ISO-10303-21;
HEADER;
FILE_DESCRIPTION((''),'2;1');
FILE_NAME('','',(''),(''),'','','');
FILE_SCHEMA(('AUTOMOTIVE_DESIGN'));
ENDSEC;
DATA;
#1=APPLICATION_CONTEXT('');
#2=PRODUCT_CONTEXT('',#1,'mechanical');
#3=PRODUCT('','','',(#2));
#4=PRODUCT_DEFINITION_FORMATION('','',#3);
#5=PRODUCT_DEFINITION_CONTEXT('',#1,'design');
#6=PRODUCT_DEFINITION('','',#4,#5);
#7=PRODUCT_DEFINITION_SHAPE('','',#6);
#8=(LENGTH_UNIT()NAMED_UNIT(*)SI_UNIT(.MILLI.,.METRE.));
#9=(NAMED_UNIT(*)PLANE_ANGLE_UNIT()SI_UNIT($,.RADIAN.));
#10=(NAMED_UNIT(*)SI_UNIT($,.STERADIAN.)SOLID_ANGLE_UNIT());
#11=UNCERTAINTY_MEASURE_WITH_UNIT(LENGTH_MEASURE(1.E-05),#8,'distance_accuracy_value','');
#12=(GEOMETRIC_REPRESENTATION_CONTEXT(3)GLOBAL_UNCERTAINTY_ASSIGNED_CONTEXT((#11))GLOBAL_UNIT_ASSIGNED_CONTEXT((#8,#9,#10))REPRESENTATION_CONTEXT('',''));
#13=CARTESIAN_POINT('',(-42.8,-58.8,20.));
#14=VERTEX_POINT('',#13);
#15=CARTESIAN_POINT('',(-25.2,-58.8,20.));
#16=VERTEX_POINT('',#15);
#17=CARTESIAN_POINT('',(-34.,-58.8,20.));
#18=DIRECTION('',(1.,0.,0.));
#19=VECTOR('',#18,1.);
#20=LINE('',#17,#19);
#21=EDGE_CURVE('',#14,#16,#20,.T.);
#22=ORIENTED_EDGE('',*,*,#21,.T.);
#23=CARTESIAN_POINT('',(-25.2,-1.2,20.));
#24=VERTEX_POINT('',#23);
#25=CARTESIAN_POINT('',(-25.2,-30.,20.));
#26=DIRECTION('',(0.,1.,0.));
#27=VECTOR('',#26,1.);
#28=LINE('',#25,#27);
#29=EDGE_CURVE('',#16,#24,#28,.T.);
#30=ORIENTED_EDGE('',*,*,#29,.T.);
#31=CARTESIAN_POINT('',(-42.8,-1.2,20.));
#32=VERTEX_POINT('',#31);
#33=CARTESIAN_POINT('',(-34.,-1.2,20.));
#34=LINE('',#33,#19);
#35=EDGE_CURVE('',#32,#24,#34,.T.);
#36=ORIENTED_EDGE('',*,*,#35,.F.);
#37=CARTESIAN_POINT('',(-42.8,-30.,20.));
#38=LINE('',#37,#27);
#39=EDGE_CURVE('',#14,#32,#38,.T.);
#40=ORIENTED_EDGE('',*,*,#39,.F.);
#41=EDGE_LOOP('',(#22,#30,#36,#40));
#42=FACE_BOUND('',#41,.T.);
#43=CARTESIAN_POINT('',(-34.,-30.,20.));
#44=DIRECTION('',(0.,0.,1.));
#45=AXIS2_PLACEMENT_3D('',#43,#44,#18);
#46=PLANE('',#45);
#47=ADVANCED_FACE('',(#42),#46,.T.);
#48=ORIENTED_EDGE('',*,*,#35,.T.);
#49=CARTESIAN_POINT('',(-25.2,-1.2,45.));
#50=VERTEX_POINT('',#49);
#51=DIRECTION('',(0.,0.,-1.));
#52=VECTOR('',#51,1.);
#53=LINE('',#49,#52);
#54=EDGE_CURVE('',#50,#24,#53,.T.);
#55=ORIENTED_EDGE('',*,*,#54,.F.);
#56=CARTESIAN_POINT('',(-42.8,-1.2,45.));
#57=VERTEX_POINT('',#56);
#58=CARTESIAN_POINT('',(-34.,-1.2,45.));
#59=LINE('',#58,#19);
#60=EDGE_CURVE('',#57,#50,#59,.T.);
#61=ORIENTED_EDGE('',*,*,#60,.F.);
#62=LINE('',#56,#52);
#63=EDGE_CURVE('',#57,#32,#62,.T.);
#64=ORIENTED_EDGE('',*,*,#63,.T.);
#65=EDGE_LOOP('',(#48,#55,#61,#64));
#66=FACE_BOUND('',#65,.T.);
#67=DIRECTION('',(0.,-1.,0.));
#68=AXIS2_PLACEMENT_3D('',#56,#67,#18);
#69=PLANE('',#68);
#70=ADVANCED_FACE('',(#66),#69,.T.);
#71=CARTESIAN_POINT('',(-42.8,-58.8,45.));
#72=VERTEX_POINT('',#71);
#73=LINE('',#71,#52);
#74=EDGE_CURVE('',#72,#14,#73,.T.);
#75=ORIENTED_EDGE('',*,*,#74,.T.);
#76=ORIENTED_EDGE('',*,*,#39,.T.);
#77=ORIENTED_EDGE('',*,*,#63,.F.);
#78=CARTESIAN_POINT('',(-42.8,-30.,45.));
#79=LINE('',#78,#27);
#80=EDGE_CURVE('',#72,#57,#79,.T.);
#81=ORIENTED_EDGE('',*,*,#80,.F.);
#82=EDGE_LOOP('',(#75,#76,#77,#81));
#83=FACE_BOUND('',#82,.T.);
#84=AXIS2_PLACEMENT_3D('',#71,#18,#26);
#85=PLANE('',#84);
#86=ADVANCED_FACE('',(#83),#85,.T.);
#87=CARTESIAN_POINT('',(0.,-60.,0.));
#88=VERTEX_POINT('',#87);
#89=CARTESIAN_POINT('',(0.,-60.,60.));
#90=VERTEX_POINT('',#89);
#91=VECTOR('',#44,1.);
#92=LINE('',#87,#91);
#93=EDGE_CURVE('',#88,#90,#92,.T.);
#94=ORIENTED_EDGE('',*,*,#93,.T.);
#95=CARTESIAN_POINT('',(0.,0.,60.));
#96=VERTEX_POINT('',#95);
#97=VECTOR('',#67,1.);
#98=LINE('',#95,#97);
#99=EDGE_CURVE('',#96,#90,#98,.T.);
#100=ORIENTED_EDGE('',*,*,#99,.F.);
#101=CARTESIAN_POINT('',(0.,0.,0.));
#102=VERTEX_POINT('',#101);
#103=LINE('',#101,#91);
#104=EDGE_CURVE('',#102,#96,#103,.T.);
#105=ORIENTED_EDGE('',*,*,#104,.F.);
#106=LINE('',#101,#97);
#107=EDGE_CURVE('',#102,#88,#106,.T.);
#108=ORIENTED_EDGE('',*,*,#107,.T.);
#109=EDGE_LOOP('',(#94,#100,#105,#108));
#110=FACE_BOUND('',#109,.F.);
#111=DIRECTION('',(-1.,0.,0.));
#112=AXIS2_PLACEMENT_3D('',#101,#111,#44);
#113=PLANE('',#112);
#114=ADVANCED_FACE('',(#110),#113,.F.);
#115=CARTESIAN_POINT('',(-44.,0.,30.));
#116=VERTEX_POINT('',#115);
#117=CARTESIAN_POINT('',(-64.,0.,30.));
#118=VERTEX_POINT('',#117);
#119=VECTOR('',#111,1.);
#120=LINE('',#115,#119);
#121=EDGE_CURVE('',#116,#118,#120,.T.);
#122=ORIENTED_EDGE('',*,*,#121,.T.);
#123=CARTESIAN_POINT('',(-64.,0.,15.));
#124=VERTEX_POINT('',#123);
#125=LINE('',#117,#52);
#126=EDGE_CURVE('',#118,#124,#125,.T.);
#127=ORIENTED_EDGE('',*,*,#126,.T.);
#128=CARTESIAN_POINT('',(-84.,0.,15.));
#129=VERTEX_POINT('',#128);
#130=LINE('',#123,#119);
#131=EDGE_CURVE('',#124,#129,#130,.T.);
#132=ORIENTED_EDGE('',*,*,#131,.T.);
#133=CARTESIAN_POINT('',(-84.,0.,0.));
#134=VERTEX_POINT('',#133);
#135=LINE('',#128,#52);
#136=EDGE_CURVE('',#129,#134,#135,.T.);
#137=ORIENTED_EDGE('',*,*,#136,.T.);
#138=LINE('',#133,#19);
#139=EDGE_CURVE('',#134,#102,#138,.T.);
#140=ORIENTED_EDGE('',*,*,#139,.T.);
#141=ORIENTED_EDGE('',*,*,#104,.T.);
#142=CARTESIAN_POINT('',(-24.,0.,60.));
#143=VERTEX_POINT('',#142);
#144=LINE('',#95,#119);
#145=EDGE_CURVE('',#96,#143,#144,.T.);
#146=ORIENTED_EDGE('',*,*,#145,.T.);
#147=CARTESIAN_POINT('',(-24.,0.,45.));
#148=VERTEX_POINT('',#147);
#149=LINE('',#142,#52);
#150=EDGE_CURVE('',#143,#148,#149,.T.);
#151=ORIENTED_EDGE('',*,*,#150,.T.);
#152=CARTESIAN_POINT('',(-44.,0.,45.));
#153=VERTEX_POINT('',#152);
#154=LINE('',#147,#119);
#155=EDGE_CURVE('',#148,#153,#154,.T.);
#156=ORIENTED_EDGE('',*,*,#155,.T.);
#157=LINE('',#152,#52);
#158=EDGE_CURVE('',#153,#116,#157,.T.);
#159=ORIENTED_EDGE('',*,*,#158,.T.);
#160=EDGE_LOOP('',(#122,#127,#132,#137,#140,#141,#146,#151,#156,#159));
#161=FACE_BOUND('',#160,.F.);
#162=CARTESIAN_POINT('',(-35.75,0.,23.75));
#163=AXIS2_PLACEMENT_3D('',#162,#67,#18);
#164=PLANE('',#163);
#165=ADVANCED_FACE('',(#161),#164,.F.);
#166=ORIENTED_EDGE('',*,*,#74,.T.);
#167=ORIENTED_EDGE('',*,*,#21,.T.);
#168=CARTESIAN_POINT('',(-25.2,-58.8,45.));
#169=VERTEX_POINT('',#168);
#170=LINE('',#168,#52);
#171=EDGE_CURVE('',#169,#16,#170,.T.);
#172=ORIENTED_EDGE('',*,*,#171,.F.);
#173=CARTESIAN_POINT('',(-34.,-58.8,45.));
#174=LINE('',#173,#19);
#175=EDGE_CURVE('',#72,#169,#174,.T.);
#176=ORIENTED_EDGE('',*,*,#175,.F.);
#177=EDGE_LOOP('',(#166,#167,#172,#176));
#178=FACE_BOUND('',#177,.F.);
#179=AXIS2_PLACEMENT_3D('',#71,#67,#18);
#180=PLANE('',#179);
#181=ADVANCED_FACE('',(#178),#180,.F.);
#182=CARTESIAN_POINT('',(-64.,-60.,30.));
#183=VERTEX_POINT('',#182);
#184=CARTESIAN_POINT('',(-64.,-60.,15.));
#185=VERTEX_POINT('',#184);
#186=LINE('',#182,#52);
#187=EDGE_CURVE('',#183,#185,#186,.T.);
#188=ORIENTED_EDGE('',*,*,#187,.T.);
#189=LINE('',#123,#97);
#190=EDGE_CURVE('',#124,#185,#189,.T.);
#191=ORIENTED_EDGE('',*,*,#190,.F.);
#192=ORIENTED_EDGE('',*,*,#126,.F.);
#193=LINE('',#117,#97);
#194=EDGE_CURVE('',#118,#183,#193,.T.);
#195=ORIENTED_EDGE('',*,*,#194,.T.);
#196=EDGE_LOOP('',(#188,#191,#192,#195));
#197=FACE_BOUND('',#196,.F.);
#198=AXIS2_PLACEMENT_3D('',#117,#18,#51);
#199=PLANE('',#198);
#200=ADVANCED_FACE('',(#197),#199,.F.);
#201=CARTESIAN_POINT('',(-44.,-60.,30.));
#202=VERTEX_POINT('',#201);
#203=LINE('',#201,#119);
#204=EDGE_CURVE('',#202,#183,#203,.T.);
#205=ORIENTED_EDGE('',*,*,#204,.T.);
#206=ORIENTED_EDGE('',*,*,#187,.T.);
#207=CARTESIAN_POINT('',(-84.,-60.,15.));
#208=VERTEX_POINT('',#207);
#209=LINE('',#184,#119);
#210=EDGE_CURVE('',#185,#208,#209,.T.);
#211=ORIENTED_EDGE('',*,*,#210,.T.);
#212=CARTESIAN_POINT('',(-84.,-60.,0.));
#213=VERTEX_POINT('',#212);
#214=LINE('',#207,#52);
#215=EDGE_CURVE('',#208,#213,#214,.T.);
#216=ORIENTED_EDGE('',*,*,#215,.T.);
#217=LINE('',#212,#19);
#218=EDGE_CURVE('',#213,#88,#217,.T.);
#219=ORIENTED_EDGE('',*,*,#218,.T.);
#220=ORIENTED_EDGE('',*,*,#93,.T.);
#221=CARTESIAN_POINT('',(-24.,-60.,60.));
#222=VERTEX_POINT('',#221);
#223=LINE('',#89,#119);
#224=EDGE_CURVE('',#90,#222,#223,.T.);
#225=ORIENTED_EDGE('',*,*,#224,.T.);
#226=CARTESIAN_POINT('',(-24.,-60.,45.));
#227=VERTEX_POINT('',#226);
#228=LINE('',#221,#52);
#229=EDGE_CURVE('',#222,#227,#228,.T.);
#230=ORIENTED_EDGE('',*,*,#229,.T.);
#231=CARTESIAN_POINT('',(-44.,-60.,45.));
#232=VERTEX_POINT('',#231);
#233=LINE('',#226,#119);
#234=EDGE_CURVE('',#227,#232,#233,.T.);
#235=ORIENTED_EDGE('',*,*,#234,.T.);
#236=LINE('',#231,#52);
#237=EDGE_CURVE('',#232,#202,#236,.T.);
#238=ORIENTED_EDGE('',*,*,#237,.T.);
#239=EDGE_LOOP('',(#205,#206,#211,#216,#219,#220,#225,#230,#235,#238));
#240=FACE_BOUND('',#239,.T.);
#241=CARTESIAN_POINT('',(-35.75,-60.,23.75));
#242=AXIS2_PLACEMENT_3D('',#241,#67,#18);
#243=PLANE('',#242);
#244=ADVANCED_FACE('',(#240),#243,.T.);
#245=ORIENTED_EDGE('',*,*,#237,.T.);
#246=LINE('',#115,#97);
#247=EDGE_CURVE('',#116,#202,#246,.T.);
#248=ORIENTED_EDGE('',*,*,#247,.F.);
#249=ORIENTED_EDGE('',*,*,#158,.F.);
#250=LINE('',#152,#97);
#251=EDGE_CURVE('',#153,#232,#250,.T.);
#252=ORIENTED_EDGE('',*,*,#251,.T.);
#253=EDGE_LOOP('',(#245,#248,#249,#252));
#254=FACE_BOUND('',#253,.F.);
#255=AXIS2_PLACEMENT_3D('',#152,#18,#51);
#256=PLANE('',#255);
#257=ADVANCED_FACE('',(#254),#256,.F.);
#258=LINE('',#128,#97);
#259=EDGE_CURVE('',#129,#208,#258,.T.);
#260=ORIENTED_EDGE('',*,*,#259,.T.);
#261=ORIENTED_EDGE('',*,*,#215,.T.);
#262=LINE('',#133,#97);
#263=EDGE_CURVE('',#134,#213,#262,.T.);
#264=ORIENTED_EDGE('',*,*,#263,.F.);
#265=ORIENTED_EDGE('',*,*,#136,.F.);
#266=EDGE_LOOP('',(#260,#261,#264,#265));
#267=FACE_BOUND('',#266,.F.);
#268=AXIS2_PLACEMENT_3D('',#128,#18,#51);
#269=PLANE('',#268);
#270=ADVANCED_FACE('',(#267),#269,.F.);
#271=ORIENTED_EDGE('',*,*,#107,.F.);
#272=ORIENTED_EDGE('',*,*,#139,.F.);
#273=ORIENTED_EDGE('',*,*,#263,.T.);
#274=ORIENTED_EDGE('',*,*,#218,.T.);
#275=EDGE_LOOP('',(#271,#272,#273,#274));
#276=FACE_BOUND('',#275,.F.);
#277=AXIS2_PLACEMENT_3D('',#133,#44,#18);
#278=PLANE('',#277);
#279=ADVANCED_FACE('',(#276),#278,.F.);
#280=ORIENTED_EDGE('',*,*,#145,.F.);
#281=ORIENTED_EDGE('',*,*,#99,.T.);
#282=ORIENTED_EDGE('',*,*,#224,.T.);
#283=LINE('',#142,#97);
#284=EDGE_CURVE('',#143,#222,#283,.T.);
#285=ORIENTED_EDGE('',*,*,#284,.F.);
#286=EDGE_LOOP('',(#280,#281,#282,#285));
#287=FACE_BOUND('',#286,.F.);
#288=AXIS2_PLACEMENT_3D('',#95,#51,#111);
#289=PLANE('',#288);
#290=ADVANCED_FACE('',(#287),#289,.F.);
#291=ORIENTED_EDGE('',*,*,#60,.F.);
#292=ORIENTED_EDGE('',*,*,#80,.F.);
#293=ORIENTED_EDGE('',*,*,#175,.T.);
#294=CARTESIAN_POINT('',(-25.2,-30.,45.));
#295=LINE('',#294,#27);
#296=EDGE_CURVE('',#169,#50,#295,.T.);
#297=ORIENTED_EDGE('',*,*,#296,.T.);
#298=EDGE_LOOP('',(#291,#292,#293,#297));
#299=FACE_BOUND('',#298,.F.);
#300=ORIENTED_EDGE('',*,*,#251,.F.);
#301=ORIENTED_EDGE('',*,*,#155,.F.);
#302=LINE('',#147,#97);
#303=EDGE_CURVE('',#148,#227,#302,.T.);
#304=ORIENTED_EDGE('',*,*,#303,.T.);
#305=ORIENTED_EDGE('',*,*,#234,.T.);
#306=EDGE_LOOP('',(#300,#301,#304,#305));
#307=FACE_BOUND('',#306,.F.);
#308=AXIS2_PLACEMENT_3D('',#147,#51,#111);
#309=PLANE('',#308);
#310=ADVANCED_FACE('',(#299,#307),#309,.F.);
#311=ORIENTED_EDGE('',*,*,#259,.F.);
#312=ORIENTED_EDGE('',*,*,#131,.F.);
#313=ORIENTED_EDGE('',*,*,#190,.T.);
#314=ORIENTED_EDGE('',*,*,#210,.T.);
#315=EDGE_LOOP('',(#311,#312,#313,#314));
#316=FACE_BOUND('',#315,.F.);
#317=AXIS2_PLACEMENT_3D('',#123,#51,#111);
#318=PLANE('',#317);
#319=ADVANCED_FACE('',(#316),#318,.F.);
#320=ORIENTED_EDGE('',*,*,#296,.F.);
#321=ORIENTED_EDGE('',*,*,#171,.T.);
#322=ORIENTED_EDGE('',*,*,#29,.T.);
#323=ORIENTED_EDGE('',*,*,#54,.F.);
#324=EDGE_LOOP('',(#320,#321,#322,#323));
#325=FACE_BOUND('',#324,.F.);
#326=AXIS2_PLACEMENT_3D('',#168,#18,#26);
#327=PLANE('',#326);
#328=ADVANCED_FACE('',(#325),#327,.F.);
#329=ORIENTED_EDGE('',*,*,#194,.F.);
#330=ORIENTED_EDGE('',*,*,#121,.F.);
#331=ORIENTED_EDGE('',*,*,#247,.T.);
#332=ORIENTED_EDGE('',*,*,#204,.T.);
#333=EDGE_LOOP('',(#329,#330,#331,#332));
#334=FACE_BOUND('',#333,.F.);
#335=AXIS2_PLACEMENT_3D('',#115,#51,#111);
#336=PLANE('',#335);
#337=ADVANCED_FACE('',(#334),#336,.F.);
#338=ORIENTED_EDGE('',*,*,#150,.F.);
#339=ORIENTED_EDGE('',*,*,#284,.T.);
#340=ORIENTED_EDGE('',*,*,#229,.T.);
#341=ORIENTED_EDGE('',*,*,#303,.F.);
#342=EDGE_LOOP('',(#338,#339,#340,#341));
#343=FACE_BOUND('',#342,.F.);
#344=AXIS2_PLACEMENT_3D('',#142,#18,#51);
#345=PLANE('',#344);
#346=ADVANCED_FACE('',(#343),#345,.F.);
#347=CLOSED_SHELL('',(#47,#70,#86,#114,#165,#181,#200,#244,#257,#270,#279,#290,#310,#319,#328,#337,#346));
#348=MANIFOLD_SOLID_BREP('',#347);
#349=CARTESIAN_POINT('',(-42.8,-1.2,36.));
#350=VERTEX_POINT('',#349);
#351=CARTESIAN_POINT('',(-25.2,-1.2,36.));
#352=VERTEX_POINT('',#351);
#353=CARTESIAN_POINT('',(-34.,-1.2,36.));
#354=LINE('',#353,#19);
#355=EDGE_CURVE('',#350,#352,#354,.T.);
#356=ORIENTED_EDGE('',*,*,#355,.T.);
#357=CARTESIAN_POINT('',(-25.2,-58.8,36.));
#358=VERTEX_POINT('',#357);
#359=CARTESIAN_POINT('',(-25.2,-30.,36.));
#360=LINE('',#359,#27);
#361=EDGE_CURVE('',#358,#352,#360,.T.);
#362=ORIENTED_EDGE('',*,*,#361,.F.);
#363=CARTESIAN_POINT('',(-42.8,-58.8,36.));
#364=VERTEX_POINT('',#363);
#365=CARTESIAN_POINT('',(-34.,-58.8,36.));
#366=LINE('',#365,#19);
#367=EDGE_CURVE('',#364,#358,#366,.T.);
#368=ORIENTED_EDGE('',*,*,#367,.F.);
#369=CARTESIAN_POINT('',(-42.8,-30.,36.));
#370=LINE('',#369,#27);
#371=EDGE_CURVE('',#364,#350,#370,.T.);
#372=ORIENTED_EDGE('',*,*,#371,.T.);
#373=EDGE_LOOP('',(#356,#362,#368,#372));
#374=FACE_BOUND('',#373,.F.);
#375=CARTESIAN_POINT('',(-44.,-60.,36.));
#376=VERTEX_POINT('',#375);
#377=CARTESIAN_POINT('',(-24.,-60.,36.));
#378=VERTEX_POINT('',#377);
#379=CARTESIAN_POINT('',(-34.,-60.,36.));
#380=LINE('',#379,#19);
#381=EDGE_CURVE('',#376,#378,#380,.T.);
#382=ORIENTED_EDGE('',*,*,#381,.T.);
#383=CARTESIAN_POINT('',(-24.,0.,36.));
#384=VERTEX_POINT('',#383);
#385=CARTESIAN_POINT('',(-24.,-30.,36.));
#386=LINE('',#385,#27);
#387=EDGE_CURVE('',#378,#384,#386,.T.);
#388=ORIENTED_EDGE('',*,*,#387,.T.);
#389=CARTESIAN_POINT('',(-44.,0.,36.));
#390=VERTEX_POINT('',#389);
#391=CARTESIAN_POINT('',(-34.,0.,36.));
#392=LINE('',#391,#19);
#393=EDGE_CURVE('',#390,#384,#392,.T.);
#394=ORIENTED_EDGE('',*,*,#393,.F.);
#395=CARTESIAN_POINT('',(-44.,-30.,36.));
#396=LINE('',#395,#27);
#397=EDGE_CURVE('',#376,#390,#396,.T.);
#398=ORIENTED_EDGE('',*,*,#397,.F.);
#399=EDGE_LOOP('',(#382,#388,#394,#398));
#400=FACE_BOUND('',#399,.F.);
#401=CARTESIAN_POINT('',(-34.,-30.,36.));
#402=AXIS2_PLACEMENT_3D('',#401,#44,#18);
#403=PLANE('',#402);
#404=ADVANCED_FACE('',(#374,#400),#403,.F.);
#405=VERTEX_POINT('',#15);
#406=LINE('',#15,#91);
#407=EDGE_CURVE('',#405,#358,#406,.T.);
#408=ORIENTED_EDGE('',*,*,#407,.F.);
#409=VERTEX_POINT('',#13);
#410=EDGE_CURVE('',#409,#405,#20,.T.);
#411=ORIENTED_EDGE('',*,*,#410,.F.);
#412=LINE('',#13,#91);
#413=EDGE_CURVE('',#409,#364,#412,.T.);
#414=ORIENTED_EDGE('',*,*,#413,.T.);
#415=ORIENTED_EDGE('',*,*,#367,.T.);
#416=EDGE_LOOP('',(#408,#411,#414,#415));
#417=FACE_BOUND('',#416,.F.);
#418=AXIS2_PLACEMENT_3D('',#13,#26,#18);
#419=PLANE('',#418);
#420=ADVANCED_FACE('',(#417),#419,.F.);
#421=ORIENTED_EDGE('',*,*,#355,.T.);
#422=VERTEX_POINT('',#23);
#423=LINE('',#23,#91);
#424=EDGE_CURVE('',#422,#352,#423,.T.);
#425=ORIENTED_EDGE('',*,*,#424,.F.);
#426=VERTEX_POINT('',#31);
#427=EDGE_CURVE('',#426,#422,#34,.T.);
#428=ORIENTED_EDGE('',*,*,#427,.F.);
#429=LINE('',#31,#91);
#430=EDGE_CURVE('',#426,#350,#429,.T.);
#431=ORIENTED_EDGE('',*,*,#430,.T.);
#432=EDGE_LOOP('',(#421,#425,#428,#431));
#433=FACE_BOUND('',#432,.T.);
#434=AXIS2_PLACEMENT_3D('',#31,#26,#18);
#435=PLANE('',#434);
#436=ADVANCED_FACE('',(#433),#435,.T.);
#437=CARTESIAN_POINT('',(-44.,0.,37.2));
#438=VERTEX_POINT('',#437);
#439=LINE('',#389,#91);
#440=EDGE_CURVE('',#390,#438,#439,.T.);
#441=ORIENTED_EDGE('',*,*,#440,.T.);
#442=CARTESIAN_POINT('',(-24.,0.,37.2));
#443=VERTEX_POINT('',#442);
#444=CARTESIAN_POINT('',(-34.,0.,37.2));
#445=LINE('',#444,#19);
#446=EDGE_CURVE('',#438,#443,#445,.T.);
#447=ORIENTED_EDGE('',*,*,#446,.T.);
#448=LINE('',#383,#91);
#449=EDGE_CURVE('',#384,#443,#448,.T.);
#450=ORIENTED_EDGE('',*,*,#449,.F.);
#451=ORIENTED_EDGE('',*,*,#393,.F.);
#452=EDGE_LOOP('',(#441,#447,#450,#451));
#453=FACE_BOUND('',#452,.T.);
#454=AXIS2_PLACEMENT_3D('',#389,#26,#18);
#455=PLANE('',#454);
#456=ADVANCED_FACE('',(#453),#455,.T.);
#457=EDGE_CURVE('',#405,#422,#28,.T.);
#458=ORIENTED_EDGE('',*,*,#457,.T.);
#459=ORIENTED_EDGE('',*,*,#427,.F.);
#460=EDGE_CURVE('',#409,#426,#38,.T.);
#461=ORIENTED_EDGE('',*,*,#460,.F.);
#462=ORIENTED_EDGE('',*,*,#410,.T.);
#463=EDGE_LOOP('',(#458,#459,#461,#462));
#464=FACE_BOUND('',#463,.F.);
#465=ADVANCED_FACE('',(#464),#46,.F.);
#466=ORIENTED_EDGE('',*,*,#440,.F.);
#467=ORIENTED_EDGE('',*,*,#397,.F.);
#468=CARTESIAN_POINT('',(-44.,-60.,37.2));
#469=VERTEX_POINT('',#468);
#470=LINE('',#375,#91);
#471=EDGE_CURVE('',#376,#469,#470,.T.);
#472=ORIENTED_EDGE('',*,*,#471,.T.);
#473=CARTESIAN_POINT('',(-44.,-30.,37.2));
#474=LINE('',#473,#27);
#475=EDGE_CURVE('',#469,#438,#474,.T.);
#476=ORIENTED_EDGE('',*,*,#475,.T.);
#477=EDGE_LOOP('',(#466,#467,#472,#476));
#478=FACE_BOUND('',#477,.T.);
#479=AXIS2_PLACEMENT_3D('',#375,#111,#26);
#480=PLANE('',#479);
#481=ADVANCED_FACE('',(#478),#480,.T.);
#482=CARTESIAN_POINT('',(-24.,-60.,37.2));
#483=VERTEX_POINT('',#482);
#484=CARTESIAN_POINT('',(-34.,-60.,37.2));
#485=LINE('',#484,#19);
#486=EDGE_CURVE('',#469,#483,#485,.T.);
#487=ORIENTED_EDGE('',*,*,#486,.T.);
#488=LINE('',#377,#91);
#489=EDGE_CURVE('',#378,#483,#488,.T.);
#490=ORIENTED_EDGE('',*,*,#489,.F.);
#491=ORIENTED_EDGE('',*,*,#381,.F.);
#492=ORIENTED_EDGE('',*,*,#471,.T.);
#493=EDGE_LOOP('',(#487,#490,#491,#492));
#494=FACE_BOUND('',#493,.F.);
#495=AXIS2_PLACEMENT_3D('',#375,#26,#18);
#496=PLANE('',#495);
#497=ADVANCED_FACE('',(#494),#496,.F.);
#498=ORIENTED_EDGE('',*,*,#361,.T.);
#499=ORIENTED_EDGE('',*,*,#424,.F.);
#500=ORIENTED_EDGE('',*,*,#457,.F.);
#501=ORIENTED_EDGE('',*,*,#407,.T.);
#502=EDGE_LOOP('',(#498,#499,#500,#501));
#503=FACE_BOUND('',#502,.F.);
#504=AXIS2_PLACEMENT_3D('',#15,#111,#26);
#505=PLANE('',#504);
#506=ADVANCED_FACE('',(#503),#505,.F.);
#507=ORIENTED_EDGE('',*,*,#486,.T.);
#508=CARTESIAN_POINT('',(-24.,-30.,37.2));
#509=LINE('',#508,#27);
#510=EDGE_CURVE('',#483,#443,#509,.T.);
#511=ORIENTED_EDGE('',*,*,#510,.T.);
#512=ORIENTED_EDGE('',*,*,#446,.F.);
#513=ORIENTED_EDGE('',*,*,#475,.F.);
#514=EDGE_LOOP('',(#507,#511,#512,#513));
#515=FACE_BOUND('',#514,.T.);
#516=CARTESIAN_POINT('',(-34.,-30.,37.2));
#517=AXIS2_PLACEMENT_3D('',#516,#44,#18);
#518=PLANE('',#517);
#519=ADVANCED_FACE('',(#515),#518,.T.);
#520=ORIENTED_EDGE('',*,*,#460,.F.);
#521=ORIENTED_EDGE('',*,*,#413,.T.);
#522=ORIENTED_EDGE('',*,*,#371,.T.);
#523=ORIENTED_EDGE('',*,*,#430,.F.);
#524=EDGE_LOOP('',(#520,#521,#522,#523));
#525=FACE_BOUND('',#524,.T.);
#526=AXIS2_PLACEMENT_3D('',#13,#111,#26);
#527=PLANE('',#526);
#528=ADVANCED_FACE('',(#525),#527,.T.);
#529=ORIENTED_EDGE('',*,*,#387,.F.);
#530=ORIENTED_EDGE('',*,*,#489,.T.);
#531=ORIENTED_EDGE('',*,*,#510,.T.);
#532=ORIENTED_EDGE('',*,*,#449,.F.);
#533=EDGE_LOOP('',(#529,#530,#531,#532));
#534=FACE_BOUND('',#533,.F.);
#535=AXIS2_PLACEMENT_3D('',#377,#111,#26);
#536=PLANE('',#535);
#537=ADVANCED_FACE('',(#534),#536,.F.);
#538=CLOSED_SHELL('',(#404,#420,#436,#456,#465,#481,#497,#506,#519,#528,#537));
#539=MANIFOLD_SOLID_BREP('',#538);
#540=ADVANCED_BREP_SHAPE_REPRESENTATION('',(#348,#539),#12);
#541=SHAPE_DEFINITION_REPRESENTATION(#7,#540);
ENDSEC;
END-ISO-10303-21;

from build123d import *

# Parameters (mm, degrees)
F1_DEPTH = 60
F2_W     = 17.6
F2_H     = 57.6
F3_DEPTH = 25
F4_DEPTH = 16
F5_W     = 20
F5_H     = 60
F5_W_2   = 17.6
F5_H_2   = 57.6
F6_DEPTH = 1.2


with BuildPart() as f1:
    # F0 (on Front) → F1 (new body)
    with BuildSketch(Plane.XZ):
        Polygon((-84, 0), (0, 0), (0, 60), (-24, 60), (-24, 45), (-44, 45), (-44, 30), (-64, 30), (-64, 15), (-84, 15), align=None)
    extrude(amount=F1_DEPTH)

    # F2 (on face) → F3 (cut)
    with BuildSketch(Plane.XY.offset(45)):
        with Locations((-34, -30)):
            Rectangle(F2_W, F2_H)
    extrude(amount=-F3_DEPTH, mode=Mode.SUBTRACT)


with BuildPart() as f4:
    # F4 (new): a face of the model
    f4_faces = [f1.part.faces().sort_by_distance(p)[0] for p in [
        (-34, -30, 20),
    ]]
    extrude(f4_faces, amount=F4_DEPTH)

    # F5 (on face) → F6 (join)
    with BuildSketch(Plane.XY.offset(36)):
        with Locations((-34, -30)):
            Rectangle(F5_W, F5_H)
        with Locations((-34, -30)):
            Rectangle(F5_W_2, F5_H_2, mode=Mode.SUBTRACT)
        with Locations((-34, -30)):
            Rectangle(F5_W_2, F5_H_2)
    extrude(amount=F6_DEPTH)


solid = Compound([f1.part, f4.part])
